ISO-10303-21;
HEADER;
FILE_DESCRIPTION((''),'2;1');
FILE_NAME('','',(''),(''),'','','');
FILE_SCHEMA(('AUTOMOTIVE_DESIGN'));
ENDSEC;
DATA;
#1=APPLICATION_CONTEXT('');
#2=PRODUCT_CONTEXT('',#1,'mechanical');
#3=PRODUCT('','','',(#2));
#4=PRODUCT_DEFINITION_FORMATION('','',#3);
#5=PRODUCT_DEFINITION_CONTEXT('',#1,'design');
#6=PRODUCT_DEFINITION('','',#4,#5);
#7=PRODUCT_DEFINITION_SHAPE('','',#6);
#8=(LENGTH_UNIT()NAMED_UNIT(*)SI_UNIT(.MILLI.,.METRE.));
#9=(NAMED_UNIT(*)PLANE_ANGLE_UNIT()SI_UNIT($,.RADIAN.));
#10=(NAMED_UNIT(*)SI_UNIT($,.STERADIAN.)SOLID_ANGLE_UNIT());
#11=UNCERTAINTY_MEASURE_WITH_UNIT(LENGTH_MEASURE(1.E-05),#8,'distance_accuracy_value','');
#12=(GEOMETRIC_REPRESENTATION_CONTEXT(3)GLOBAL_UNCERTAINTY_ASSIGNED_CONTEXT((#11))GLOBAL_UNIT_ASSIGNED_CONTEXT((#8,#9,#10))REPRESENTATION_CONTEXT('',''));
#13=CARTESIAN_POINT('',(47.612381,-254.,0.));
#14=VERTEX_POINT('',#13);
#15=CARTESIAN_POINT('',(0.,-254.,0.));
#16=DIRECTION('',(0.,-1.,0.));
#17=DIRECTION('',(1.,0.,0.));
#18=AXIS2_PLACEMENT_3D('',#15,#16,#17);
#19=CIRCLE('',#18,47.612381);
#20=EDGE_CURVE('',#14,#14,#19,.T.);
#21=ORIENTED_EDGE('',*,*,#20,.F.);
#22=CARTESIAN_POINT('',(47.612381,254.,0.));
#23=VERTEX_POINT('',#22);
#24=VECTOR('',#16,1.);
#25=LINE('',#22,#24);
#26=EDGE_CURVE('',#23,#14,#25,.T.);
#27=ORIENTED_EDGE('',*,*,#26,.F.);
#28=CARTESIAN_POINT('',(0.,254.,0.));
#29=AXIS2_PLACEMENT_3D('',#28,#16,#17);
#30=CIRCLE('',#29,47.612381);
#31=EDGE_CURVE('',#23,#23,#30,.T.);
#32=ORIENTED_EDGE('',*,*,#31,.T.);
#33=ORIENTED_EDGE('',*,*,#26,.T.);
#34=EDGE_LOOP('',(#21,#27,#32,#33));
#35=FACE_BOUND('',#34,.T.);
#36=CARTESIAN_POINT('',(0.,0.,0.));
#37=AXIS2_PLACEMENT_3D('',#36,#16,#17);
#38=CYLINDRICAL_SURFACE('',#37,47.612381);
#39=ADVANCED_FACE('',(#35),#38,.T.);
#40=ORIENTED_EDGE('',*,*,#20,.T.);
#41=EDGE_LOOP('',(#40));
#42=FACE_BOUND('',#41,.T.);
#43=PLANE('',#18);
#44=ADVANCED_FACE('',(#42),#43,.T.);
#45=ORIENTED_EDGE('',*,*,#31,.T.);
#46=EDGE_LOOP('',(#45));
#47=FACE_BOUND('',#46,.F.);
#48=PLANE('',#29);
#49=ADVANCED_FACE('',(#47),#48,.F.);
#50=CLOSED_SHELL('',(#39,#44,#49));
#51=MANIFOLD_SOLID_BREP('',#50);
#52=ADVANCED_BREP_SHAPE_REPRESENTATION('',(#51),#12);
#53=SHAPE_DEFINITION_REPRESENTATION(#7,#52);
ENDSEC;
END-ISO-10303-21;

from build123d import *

# Parameters (mm, degrees)
F0_R          = 47.6123806479
F1_DEPTH      = 254
F1_DEPTH_BACK = 254


# Not quite as in the source:
# - the program builds the solid bodies; features that only make, move or delete a surface that nothing else refers to are left out


with BuildPart() as f1:
    # F0 (on Front) → F1 (new body, two sides)
    with BuildSketch(Plane.XZ) as f1_sk:
        Circle(F0_R)
    extrude(amount=F1_DEPTH)
    extrude(f1_sk.sketch, amount=-F1_DEPTH_BACK)


solid = f1.part
